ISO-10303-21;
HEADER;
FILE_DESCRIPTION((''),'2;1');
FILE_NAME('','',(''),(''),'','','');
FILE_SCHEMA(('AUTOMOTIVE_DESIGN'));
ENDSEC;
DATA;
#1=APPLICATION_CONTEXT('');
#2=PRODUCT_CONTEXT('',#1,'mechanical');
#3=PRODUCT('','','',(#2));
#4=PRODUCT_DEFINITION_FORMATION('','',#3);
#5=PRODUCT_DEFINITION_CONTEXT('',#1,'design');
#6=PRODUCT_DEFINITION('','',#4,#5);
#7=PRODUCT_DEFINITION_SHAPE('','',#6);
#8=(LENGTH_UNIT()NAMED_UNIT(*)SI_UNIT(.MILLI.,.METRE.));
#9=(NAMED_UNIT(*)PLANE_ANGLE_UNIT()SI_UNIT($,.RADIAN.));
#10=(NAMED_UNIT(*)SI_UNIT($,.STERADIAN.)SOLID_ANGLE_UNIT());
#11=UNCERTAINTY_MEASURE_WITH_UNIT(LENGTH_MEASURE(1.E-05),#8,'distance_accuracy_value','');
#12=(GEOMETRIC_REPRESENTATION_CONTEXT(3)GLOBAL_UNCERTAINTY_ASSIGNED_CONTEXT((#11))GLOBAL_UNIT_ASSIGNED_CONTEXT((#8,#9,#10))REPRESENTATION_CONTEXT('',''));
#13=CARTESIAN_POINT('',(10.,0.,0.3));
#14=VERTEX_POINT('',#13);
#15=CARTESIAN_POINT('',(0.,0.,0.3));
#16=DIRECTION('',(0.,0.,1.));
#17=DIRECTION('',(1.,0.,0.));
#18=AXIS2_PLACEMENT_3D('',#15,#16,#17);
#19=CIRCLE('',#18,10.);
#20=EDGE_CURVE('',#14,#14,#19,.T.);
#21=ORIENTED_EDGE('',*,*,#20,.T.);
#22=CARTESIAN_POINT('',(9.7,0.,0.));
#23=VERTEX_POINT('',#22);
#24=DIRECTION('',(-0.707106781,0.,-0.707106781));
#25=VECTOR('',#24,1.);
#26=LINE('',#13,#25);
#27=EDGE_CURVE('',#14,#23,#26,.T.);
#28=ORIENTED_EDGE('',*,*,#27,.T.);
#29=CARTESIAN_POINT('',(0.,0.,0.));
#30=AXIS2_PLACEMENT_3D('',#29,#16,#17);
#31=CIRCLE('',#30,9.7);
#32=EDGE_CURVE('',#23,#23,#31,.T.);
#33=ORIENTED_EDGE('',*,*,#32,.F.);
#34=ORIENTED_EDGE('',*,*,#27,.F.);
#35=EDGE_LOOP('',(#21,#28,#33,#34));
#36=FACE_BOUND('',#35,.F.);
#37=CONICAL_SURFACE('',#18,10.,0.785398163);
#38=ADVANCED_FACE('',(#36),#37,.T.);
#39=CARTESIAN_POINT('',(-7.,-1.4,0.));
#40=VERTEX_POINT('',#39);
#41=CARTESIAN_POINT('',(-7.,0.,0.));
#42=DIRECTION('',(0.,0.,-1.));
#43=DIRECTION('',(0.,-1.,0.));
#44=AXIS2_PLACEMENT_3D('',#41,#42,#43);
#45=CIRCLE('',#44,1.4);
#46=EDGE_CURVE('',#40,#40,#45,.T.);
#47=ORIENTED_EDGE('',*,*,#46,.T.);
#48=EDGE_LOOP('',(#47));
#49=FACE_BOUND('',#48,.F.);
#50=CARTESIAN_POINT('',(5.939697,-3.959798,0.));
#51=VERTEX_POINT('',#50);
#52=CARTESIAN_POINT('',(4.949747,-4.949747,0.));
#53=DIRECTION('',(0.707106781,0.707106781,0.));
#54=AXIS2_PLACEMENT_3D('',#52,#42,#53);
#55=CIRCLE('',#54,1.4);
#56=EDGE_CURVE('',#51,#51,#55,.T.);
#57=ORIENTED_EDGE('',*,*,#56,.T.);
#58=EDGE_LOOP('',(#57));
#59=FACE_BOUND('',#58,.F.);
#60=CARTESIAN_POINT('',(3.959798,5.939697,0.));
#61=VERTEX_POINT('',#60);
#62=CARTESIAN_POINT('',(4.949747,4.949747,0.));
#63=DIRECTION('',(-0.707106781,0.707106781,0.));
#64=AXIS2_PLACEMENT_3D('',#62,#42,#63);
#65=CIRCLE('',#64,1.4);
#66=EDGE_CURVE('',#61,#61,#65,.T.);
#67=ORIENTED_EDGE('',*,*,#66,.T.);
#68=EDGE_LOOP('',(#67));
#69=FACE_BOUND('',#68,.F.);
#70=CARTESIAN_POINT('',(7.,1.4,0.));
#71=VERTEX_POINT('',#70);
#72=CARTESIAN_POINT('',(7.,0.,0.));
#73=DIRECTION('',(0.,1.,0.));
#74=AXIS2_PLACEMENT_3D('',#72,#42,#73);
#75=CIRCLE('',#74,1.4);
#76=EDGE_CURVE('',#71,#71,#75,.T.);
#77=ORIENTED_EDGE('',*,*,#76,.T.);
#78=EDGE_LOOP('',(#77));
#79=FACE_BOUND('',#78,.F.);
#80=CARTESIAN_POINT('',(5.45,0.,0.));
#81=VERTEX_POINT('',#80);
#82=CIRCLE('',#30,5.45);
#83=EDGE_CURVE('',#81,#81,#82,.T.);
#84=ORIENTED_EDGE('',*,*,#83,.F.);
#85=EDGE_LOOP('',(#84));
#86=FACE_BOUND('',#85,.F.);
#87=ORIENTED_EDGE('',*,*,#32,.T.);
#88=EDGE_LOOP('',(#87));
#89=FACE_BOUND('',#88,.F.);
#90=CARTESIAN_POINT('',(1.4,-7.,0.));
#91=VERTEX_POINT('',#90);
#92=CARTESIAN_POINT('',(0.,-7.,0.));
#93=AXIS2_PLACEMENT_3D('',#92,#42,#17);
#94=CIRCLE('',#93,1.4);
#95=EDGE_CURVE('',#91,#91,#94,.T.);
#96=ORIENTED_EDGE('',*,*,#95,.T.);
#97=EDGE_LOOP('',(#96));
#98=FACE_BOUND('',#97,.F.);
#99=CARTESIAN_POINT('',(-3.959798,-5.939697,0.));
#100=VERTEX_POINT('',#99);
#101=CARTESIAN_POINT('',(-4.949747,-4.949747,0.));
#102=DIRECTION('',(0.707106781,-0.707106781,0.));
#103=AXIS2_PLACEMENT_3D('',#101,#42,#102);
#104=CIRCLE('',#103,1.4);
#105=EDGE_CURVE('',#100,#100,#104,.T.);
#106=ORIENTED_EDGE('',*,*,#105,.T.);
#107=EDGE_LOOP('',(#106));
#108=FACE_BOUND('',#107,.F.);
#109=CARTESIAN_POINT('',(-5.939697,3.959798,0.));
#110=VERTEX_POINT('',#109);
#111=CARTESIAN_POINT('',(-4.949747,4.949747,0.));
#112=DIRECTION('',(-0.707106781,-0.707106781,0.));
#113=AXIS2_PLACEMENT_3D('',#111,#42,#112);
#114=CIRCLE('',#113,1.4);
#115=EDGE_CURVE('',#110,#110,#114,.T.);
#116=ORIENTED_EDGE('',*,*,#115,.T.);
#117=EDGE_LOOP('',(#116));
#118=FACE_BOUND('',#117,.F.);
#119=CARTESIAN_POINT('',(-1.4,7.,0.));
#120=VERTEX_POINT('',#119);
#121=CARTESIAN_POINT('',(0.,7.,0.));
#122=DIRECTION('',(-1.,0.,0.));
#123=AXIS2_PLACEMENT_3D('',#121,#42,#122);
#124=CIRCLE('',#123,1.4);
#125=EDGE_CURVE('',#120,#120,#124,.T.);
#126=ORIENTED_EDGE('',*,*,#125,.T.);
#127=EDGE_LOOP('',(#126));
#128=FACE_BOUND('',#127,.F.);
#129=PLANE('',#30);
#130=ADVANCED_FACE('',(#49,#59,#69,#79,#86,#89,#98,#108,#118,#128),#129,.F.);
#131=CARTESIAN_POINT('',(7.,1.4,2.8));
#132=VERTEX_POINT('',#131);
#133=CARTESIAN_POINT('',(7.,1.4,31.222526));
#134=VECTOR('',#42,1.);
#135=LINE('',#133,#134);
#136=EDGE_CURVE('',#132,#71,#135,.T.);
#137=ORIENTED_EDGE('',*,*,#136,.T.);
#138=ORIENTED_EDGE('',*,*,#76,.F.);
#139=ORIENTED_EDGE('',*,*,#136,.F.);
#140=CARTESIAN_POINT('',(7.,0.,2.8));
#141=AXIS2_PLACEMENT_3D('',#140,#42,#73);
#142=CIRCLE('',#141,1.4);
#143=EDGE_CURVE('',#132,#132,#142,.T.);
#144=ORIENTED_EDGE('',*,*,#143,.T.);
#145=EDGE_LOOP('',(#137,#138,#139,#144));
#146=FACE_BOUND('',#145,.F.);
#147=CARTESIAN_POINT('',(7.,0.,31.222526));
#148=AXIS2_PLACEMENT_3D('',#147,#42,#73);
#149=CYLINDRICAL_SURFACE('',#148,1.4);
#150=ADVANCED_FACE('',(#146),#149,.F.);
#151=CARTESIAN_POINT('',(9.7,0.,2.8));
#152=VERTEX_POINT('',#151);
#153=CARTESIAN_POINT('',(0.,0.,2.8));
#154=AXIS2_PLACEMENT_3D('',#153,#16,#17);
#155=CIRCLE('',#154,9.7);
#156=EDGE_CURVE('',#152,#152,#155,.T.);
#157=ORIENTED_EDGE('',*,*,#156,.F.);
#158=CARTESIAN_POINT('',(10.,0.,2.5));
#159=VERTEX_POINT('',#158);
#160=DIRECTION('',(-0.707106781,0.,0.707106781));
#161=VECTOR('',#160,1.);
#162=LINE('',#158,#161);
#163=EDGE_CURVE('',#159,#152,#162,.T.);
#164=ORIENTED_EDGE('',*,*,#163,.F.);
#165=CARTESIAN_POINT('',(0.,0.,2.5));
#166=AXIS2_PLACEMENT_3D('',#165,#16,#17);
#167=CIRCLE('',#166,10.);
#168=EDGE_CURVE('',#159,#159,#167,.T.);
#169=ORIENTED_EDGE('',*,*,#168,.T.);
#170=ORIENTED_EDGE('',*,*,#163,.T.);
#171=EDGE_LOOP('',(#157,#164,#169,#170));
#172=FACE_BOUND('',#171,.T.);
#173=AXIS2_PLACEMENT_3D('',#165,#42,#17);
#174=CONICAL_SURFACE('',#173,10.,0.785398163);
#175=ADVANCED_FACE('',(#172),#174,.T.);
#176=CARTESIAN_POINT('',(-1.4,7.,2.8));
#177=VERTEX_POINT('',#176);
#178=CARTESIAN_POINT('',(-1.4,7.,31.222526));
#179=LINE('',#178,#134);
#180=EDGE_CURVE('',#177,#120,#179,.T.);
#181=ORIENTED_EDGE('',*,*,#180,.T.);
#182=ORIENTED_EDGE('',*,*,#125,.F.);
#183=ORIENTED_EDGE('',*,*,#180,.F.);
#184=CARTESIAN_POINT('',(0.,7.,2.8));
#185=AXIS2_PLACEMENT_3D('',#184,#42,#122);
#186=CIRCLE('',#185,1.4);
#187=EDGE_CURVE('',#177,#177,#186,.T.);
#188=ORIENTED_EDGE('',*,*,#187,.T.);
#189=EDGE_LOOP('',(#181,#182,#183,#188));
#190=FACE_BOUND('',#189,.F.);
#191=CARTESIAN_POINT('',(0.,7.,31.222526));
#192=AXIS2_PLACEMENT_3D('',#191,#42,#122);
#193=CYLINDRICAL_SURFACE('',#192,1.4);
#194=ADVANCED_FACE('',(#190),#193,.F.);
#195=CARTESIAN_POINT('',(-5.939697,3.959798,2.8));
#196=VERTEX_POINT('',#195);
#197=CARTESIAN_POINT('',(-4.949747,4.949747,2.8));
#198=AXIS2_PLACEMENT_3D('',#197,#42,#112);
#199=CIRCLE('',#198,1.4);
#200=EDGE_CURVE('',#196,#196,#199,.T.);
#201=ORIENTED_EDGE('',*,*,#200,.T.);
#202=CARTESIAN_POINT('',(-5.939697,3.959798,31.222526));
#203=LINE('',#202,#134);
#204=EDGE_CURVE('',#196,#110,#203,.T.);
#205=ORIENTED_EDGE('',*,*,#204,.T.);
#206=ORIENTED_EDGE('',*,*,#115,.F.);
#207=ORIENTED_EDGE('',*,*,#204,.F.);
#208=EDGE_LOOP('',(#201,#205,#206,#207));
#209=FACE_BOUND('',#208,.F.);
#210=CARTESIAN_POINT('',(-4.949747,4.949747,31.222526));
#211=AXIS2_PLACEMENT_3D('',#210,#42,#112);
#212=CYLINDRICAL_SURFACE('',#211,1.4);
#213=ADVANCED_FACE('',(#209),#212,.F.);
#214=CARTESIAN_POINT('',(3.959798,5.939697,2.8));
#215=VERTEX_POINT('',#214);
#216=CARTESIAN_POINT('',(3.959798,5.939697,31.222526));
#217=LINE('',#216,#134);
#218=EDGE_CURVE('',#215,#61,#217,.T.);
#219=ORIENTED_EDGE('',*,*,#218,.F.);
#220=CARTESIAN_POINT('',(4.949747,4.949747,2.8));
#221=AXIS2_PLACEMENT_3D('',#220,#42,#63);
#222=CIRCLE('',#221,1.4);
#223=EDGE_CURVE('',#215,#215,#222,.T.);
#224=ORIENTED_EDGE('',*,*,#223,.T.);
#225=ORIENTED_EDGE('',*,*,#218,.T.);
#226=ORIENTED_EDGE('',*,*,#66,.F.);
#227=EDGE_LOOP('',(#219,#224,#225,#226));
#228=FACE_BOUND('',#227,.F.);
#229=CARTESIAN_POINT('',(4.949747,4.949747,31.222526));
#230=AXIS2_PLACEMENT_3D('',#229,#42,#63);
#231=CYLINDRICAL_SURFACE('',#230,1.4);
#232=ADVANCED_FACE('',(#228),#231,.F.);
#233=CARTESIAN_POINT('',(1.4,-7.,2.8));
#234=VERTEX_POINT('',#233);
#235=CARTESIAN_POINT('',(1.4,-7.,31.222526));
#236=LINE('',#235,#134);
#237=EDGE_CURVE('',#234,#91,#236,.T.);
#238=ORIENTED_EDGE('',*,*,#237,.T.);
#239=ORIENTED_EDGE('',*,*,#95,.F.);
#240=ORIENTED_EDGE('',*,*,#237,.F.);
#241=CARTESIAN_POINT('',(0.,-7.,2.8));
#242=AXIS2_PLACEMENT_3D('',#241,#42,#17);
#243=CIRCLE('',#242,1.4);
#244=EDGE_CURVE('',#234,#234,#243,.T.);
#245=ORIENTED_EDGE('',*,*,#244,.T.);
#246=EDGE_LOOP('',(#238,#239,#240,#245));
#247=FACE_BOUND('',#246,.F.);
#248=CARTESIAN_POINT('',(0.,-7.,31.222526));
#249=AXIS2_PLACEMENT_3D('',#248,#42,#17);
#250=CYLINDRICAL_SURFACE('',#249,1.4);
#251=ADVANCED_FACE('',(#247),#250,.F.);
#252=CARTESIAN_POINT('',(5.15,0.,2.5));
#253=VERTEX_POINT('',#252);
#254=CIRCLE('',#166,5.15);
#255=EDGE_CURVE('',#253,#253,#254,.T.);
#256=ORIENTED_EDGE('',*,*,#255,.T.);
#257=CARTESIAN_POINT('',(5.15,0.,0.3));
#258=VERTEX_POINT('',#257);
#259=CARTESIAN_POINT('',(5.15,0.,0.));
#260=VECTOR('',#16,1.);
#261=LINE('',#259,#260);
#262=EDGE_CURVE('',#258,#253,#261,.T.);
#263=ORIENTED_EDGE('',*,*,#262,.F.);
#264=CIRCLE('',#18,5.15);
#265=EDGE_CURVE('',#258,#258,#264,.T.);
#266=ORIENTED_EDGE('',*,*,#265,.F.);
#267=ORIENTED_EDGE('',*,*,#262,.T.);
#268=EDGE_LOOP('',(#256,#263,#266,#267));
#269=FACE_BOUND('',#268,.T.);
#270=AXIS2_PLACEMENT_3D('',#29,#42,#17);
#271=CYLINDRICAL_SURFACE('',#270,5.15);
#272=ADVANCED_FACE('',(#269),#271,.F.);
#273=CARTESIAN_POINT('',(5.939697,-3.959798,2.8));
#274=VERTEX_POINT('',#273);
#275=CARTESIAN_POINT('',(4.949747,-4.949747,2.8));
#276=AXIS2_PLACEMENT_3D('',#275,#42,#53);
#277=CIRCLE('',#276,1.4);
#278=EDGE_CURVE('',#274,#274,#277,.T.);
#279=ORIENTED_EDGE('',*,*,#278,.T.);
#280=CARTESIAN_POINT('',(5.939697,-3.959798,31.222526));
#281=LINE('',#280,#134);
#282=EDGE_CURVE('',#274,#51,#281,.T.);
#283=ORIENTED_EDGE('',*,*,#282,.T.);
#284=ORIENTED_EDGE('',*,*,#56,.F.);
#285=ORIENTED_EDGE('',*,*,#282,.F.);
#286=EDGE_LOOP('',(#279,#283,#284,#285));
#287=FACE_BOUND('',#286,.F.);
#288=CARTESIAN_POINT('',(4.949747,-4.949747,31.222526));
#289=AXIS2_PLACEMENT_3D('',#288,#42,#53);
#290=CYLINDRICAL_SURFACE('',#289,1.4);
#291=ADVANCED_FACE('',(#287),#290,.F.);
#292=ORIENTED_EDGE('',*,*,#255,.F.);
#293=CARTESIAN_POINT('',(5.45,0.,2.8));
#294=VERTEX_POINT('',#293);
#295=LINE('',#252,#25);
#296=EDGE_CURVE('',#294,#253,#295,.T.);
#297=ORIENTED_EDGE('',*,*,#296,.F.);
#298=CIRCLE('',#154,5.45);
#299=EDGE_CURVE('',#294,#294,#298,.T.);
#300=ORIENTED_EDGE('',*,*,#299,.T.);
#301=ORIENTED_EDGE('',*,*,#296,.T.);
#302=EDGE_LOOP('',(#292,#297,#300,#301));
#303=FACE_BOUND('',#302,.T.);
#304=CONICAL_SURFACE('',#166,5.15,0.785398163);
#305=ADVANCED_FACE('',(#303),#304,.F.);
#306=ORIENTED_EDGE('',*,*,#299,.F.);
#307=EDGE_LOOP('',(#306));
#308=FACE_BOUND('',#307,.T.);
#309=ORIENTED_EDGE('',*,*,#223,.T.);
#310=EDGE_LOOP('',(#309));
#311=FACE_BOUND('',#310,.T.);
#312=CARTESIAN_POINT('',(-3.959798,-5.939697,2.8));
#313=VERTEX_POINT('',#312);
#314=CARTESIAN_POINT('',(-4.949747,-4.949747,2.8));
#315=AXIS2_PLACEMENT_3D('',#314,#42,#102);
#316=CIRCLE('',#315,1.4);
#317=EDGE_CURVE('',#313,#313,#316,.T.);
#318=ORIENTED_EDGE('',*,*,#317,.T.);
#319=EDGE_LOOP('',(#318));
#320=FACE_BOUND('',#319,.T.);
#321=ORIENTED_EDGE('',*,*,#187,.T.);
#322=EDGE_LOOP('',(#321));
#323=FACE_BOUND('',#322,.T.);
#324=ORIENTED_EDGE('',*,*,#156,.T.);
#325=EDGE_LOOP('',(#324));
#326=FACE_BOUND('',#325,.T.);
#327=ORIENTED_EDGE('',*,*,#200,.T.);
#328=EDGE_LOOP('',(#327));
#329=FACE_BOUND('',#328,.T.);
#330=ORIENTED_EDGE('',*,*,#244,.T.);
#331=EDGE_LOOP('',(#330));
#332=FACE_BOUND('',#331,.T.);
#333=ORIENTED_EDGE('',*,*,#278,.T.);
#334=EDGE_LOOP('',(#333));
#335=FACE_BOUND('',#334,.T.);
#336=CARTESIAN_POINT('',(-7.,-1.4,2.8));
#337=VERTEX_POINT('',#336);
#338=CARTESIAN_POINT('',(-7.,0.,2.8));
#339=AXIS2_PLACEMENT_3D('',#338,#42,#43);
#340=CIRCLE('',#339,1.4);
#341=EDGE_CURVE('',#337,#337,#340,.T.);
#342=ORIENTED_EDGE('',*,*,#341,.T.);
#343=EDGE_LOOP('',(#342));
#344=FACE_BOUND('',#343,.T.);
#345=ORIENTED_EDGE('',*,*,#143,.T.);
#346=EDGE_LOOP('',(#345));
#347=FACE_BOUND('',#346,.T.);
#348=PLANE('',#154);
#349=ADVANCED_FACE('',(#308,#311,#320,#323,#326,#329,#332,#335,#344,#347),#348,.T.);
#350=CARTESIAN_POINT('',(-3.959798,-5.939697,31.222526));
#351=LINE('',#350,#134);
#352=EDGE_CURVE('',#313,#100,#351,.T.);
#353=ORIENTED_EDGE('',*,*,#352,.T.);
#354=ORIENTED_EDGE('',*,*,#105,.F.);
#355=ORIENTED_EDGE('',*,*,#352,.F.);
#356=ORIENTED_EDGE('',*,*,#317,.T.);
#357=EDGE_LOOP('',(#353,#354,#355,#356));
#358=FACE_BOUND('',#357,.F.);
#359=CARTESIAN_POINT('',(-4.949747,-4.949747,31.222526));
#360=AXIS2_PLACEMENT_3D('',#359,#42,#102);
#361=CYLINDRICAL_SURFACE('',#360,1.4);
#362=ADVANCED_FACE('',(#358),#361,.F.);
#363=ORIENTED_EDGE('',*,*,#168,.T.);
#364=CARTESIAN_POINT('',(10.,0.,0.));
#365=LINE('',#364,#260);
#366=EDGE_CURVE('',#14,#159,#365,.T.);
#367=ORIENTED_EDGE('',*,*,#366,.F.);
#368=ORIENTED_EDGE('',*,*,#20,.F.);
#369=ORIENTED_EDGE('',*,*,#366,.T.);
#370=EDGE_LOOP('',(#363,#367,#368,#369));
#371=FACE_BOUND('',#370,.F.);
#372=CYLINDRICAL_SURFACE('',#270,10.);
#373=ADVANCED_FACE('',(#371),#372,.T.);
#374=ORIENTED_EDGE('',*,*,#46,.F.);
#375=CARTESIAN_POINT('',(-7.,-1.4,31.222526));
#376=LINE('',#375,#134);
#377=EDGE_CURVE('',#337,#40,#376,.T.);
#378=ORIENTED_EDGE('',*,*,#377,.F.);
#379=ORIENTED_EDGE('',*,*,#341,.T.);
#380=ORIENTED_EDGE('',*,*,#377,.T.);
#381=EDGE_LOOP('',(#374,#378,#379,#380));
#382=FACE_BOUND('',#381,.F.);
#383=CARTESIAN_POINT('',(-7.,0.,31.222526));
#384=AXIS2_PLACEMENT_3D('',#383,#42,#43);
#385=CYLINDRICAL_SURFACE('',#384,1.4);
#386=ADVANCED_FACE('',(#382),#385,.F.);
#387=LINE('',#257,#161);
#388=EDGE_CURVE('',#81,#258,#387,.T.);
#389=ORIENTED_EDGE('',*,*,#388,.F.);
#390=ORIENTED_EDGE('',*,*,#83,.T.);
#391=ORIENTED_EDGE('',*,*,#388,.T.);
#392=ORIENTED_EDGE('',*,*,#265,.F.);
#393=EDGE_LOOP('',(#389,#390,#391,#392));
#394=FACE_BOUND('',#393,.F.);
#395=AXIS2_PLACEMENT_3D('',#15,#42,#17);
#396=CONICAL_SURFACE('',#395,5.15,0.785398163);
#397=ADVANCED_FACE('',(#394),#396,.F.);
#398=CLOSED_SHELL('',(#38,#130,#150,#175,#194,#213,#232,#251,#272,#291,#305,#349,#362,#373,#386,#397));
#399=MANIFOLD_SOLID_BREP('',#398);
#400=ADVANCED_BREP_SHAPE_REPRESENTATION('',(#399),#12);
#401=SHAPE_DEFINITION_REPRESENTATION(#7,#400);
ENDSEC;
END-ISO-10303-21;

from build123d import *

# Parameters (mm, degrees)
F0_R            = 10
F0_R_2          = 5.15
F1_DEPTH        = 2.8
F3_D            = 2.8
F3_COPIES_COUNT = 8
F4_SIZE         = 0.3


# Not quite as in the source:
# - a pattern or mirror of a feature is missing from the dataset's text; its kind, count and spacing are read off the source's solid


with BuildPart() as f1:
    # F0 (on Top) → F1 (new body)
    with BuildSketch(Plane.XY):
        Circle(F0_R)
        Circle(F0_R_2, mode=Mode.SUBTRACT)
    extrude(amount=F1_DEPTH)

    # F3 (through all)
    with Locations(Plane.XY.offset(2.8)):
        with Locations((0, 7)):
            f3 = Hole(F3_D / 2)

    # F3_copies: F3 ×8 about axis
    f3_copies_axis = Axis((0, 0, 0), (0, 0, 1))
    for i in range(1, F3_COPIES_COUNT):
        add(f3.rotate(f3_copies_axis, i * 360 / F3_COPIES_COUNT), mode=Mode.SUBTRACT)

    # F4
    f4_edges = [f1.edges().sort_by_distance(p)[0] for p in [
        (-5.15, 0, 0),
        (-10, 0, 0),
        (-5.15, 0, 2.8),
        (-10, 0, 2.8),
    ]]
    chamfer(f4_edges, length=F4_SIZE)


solid = f1.part
